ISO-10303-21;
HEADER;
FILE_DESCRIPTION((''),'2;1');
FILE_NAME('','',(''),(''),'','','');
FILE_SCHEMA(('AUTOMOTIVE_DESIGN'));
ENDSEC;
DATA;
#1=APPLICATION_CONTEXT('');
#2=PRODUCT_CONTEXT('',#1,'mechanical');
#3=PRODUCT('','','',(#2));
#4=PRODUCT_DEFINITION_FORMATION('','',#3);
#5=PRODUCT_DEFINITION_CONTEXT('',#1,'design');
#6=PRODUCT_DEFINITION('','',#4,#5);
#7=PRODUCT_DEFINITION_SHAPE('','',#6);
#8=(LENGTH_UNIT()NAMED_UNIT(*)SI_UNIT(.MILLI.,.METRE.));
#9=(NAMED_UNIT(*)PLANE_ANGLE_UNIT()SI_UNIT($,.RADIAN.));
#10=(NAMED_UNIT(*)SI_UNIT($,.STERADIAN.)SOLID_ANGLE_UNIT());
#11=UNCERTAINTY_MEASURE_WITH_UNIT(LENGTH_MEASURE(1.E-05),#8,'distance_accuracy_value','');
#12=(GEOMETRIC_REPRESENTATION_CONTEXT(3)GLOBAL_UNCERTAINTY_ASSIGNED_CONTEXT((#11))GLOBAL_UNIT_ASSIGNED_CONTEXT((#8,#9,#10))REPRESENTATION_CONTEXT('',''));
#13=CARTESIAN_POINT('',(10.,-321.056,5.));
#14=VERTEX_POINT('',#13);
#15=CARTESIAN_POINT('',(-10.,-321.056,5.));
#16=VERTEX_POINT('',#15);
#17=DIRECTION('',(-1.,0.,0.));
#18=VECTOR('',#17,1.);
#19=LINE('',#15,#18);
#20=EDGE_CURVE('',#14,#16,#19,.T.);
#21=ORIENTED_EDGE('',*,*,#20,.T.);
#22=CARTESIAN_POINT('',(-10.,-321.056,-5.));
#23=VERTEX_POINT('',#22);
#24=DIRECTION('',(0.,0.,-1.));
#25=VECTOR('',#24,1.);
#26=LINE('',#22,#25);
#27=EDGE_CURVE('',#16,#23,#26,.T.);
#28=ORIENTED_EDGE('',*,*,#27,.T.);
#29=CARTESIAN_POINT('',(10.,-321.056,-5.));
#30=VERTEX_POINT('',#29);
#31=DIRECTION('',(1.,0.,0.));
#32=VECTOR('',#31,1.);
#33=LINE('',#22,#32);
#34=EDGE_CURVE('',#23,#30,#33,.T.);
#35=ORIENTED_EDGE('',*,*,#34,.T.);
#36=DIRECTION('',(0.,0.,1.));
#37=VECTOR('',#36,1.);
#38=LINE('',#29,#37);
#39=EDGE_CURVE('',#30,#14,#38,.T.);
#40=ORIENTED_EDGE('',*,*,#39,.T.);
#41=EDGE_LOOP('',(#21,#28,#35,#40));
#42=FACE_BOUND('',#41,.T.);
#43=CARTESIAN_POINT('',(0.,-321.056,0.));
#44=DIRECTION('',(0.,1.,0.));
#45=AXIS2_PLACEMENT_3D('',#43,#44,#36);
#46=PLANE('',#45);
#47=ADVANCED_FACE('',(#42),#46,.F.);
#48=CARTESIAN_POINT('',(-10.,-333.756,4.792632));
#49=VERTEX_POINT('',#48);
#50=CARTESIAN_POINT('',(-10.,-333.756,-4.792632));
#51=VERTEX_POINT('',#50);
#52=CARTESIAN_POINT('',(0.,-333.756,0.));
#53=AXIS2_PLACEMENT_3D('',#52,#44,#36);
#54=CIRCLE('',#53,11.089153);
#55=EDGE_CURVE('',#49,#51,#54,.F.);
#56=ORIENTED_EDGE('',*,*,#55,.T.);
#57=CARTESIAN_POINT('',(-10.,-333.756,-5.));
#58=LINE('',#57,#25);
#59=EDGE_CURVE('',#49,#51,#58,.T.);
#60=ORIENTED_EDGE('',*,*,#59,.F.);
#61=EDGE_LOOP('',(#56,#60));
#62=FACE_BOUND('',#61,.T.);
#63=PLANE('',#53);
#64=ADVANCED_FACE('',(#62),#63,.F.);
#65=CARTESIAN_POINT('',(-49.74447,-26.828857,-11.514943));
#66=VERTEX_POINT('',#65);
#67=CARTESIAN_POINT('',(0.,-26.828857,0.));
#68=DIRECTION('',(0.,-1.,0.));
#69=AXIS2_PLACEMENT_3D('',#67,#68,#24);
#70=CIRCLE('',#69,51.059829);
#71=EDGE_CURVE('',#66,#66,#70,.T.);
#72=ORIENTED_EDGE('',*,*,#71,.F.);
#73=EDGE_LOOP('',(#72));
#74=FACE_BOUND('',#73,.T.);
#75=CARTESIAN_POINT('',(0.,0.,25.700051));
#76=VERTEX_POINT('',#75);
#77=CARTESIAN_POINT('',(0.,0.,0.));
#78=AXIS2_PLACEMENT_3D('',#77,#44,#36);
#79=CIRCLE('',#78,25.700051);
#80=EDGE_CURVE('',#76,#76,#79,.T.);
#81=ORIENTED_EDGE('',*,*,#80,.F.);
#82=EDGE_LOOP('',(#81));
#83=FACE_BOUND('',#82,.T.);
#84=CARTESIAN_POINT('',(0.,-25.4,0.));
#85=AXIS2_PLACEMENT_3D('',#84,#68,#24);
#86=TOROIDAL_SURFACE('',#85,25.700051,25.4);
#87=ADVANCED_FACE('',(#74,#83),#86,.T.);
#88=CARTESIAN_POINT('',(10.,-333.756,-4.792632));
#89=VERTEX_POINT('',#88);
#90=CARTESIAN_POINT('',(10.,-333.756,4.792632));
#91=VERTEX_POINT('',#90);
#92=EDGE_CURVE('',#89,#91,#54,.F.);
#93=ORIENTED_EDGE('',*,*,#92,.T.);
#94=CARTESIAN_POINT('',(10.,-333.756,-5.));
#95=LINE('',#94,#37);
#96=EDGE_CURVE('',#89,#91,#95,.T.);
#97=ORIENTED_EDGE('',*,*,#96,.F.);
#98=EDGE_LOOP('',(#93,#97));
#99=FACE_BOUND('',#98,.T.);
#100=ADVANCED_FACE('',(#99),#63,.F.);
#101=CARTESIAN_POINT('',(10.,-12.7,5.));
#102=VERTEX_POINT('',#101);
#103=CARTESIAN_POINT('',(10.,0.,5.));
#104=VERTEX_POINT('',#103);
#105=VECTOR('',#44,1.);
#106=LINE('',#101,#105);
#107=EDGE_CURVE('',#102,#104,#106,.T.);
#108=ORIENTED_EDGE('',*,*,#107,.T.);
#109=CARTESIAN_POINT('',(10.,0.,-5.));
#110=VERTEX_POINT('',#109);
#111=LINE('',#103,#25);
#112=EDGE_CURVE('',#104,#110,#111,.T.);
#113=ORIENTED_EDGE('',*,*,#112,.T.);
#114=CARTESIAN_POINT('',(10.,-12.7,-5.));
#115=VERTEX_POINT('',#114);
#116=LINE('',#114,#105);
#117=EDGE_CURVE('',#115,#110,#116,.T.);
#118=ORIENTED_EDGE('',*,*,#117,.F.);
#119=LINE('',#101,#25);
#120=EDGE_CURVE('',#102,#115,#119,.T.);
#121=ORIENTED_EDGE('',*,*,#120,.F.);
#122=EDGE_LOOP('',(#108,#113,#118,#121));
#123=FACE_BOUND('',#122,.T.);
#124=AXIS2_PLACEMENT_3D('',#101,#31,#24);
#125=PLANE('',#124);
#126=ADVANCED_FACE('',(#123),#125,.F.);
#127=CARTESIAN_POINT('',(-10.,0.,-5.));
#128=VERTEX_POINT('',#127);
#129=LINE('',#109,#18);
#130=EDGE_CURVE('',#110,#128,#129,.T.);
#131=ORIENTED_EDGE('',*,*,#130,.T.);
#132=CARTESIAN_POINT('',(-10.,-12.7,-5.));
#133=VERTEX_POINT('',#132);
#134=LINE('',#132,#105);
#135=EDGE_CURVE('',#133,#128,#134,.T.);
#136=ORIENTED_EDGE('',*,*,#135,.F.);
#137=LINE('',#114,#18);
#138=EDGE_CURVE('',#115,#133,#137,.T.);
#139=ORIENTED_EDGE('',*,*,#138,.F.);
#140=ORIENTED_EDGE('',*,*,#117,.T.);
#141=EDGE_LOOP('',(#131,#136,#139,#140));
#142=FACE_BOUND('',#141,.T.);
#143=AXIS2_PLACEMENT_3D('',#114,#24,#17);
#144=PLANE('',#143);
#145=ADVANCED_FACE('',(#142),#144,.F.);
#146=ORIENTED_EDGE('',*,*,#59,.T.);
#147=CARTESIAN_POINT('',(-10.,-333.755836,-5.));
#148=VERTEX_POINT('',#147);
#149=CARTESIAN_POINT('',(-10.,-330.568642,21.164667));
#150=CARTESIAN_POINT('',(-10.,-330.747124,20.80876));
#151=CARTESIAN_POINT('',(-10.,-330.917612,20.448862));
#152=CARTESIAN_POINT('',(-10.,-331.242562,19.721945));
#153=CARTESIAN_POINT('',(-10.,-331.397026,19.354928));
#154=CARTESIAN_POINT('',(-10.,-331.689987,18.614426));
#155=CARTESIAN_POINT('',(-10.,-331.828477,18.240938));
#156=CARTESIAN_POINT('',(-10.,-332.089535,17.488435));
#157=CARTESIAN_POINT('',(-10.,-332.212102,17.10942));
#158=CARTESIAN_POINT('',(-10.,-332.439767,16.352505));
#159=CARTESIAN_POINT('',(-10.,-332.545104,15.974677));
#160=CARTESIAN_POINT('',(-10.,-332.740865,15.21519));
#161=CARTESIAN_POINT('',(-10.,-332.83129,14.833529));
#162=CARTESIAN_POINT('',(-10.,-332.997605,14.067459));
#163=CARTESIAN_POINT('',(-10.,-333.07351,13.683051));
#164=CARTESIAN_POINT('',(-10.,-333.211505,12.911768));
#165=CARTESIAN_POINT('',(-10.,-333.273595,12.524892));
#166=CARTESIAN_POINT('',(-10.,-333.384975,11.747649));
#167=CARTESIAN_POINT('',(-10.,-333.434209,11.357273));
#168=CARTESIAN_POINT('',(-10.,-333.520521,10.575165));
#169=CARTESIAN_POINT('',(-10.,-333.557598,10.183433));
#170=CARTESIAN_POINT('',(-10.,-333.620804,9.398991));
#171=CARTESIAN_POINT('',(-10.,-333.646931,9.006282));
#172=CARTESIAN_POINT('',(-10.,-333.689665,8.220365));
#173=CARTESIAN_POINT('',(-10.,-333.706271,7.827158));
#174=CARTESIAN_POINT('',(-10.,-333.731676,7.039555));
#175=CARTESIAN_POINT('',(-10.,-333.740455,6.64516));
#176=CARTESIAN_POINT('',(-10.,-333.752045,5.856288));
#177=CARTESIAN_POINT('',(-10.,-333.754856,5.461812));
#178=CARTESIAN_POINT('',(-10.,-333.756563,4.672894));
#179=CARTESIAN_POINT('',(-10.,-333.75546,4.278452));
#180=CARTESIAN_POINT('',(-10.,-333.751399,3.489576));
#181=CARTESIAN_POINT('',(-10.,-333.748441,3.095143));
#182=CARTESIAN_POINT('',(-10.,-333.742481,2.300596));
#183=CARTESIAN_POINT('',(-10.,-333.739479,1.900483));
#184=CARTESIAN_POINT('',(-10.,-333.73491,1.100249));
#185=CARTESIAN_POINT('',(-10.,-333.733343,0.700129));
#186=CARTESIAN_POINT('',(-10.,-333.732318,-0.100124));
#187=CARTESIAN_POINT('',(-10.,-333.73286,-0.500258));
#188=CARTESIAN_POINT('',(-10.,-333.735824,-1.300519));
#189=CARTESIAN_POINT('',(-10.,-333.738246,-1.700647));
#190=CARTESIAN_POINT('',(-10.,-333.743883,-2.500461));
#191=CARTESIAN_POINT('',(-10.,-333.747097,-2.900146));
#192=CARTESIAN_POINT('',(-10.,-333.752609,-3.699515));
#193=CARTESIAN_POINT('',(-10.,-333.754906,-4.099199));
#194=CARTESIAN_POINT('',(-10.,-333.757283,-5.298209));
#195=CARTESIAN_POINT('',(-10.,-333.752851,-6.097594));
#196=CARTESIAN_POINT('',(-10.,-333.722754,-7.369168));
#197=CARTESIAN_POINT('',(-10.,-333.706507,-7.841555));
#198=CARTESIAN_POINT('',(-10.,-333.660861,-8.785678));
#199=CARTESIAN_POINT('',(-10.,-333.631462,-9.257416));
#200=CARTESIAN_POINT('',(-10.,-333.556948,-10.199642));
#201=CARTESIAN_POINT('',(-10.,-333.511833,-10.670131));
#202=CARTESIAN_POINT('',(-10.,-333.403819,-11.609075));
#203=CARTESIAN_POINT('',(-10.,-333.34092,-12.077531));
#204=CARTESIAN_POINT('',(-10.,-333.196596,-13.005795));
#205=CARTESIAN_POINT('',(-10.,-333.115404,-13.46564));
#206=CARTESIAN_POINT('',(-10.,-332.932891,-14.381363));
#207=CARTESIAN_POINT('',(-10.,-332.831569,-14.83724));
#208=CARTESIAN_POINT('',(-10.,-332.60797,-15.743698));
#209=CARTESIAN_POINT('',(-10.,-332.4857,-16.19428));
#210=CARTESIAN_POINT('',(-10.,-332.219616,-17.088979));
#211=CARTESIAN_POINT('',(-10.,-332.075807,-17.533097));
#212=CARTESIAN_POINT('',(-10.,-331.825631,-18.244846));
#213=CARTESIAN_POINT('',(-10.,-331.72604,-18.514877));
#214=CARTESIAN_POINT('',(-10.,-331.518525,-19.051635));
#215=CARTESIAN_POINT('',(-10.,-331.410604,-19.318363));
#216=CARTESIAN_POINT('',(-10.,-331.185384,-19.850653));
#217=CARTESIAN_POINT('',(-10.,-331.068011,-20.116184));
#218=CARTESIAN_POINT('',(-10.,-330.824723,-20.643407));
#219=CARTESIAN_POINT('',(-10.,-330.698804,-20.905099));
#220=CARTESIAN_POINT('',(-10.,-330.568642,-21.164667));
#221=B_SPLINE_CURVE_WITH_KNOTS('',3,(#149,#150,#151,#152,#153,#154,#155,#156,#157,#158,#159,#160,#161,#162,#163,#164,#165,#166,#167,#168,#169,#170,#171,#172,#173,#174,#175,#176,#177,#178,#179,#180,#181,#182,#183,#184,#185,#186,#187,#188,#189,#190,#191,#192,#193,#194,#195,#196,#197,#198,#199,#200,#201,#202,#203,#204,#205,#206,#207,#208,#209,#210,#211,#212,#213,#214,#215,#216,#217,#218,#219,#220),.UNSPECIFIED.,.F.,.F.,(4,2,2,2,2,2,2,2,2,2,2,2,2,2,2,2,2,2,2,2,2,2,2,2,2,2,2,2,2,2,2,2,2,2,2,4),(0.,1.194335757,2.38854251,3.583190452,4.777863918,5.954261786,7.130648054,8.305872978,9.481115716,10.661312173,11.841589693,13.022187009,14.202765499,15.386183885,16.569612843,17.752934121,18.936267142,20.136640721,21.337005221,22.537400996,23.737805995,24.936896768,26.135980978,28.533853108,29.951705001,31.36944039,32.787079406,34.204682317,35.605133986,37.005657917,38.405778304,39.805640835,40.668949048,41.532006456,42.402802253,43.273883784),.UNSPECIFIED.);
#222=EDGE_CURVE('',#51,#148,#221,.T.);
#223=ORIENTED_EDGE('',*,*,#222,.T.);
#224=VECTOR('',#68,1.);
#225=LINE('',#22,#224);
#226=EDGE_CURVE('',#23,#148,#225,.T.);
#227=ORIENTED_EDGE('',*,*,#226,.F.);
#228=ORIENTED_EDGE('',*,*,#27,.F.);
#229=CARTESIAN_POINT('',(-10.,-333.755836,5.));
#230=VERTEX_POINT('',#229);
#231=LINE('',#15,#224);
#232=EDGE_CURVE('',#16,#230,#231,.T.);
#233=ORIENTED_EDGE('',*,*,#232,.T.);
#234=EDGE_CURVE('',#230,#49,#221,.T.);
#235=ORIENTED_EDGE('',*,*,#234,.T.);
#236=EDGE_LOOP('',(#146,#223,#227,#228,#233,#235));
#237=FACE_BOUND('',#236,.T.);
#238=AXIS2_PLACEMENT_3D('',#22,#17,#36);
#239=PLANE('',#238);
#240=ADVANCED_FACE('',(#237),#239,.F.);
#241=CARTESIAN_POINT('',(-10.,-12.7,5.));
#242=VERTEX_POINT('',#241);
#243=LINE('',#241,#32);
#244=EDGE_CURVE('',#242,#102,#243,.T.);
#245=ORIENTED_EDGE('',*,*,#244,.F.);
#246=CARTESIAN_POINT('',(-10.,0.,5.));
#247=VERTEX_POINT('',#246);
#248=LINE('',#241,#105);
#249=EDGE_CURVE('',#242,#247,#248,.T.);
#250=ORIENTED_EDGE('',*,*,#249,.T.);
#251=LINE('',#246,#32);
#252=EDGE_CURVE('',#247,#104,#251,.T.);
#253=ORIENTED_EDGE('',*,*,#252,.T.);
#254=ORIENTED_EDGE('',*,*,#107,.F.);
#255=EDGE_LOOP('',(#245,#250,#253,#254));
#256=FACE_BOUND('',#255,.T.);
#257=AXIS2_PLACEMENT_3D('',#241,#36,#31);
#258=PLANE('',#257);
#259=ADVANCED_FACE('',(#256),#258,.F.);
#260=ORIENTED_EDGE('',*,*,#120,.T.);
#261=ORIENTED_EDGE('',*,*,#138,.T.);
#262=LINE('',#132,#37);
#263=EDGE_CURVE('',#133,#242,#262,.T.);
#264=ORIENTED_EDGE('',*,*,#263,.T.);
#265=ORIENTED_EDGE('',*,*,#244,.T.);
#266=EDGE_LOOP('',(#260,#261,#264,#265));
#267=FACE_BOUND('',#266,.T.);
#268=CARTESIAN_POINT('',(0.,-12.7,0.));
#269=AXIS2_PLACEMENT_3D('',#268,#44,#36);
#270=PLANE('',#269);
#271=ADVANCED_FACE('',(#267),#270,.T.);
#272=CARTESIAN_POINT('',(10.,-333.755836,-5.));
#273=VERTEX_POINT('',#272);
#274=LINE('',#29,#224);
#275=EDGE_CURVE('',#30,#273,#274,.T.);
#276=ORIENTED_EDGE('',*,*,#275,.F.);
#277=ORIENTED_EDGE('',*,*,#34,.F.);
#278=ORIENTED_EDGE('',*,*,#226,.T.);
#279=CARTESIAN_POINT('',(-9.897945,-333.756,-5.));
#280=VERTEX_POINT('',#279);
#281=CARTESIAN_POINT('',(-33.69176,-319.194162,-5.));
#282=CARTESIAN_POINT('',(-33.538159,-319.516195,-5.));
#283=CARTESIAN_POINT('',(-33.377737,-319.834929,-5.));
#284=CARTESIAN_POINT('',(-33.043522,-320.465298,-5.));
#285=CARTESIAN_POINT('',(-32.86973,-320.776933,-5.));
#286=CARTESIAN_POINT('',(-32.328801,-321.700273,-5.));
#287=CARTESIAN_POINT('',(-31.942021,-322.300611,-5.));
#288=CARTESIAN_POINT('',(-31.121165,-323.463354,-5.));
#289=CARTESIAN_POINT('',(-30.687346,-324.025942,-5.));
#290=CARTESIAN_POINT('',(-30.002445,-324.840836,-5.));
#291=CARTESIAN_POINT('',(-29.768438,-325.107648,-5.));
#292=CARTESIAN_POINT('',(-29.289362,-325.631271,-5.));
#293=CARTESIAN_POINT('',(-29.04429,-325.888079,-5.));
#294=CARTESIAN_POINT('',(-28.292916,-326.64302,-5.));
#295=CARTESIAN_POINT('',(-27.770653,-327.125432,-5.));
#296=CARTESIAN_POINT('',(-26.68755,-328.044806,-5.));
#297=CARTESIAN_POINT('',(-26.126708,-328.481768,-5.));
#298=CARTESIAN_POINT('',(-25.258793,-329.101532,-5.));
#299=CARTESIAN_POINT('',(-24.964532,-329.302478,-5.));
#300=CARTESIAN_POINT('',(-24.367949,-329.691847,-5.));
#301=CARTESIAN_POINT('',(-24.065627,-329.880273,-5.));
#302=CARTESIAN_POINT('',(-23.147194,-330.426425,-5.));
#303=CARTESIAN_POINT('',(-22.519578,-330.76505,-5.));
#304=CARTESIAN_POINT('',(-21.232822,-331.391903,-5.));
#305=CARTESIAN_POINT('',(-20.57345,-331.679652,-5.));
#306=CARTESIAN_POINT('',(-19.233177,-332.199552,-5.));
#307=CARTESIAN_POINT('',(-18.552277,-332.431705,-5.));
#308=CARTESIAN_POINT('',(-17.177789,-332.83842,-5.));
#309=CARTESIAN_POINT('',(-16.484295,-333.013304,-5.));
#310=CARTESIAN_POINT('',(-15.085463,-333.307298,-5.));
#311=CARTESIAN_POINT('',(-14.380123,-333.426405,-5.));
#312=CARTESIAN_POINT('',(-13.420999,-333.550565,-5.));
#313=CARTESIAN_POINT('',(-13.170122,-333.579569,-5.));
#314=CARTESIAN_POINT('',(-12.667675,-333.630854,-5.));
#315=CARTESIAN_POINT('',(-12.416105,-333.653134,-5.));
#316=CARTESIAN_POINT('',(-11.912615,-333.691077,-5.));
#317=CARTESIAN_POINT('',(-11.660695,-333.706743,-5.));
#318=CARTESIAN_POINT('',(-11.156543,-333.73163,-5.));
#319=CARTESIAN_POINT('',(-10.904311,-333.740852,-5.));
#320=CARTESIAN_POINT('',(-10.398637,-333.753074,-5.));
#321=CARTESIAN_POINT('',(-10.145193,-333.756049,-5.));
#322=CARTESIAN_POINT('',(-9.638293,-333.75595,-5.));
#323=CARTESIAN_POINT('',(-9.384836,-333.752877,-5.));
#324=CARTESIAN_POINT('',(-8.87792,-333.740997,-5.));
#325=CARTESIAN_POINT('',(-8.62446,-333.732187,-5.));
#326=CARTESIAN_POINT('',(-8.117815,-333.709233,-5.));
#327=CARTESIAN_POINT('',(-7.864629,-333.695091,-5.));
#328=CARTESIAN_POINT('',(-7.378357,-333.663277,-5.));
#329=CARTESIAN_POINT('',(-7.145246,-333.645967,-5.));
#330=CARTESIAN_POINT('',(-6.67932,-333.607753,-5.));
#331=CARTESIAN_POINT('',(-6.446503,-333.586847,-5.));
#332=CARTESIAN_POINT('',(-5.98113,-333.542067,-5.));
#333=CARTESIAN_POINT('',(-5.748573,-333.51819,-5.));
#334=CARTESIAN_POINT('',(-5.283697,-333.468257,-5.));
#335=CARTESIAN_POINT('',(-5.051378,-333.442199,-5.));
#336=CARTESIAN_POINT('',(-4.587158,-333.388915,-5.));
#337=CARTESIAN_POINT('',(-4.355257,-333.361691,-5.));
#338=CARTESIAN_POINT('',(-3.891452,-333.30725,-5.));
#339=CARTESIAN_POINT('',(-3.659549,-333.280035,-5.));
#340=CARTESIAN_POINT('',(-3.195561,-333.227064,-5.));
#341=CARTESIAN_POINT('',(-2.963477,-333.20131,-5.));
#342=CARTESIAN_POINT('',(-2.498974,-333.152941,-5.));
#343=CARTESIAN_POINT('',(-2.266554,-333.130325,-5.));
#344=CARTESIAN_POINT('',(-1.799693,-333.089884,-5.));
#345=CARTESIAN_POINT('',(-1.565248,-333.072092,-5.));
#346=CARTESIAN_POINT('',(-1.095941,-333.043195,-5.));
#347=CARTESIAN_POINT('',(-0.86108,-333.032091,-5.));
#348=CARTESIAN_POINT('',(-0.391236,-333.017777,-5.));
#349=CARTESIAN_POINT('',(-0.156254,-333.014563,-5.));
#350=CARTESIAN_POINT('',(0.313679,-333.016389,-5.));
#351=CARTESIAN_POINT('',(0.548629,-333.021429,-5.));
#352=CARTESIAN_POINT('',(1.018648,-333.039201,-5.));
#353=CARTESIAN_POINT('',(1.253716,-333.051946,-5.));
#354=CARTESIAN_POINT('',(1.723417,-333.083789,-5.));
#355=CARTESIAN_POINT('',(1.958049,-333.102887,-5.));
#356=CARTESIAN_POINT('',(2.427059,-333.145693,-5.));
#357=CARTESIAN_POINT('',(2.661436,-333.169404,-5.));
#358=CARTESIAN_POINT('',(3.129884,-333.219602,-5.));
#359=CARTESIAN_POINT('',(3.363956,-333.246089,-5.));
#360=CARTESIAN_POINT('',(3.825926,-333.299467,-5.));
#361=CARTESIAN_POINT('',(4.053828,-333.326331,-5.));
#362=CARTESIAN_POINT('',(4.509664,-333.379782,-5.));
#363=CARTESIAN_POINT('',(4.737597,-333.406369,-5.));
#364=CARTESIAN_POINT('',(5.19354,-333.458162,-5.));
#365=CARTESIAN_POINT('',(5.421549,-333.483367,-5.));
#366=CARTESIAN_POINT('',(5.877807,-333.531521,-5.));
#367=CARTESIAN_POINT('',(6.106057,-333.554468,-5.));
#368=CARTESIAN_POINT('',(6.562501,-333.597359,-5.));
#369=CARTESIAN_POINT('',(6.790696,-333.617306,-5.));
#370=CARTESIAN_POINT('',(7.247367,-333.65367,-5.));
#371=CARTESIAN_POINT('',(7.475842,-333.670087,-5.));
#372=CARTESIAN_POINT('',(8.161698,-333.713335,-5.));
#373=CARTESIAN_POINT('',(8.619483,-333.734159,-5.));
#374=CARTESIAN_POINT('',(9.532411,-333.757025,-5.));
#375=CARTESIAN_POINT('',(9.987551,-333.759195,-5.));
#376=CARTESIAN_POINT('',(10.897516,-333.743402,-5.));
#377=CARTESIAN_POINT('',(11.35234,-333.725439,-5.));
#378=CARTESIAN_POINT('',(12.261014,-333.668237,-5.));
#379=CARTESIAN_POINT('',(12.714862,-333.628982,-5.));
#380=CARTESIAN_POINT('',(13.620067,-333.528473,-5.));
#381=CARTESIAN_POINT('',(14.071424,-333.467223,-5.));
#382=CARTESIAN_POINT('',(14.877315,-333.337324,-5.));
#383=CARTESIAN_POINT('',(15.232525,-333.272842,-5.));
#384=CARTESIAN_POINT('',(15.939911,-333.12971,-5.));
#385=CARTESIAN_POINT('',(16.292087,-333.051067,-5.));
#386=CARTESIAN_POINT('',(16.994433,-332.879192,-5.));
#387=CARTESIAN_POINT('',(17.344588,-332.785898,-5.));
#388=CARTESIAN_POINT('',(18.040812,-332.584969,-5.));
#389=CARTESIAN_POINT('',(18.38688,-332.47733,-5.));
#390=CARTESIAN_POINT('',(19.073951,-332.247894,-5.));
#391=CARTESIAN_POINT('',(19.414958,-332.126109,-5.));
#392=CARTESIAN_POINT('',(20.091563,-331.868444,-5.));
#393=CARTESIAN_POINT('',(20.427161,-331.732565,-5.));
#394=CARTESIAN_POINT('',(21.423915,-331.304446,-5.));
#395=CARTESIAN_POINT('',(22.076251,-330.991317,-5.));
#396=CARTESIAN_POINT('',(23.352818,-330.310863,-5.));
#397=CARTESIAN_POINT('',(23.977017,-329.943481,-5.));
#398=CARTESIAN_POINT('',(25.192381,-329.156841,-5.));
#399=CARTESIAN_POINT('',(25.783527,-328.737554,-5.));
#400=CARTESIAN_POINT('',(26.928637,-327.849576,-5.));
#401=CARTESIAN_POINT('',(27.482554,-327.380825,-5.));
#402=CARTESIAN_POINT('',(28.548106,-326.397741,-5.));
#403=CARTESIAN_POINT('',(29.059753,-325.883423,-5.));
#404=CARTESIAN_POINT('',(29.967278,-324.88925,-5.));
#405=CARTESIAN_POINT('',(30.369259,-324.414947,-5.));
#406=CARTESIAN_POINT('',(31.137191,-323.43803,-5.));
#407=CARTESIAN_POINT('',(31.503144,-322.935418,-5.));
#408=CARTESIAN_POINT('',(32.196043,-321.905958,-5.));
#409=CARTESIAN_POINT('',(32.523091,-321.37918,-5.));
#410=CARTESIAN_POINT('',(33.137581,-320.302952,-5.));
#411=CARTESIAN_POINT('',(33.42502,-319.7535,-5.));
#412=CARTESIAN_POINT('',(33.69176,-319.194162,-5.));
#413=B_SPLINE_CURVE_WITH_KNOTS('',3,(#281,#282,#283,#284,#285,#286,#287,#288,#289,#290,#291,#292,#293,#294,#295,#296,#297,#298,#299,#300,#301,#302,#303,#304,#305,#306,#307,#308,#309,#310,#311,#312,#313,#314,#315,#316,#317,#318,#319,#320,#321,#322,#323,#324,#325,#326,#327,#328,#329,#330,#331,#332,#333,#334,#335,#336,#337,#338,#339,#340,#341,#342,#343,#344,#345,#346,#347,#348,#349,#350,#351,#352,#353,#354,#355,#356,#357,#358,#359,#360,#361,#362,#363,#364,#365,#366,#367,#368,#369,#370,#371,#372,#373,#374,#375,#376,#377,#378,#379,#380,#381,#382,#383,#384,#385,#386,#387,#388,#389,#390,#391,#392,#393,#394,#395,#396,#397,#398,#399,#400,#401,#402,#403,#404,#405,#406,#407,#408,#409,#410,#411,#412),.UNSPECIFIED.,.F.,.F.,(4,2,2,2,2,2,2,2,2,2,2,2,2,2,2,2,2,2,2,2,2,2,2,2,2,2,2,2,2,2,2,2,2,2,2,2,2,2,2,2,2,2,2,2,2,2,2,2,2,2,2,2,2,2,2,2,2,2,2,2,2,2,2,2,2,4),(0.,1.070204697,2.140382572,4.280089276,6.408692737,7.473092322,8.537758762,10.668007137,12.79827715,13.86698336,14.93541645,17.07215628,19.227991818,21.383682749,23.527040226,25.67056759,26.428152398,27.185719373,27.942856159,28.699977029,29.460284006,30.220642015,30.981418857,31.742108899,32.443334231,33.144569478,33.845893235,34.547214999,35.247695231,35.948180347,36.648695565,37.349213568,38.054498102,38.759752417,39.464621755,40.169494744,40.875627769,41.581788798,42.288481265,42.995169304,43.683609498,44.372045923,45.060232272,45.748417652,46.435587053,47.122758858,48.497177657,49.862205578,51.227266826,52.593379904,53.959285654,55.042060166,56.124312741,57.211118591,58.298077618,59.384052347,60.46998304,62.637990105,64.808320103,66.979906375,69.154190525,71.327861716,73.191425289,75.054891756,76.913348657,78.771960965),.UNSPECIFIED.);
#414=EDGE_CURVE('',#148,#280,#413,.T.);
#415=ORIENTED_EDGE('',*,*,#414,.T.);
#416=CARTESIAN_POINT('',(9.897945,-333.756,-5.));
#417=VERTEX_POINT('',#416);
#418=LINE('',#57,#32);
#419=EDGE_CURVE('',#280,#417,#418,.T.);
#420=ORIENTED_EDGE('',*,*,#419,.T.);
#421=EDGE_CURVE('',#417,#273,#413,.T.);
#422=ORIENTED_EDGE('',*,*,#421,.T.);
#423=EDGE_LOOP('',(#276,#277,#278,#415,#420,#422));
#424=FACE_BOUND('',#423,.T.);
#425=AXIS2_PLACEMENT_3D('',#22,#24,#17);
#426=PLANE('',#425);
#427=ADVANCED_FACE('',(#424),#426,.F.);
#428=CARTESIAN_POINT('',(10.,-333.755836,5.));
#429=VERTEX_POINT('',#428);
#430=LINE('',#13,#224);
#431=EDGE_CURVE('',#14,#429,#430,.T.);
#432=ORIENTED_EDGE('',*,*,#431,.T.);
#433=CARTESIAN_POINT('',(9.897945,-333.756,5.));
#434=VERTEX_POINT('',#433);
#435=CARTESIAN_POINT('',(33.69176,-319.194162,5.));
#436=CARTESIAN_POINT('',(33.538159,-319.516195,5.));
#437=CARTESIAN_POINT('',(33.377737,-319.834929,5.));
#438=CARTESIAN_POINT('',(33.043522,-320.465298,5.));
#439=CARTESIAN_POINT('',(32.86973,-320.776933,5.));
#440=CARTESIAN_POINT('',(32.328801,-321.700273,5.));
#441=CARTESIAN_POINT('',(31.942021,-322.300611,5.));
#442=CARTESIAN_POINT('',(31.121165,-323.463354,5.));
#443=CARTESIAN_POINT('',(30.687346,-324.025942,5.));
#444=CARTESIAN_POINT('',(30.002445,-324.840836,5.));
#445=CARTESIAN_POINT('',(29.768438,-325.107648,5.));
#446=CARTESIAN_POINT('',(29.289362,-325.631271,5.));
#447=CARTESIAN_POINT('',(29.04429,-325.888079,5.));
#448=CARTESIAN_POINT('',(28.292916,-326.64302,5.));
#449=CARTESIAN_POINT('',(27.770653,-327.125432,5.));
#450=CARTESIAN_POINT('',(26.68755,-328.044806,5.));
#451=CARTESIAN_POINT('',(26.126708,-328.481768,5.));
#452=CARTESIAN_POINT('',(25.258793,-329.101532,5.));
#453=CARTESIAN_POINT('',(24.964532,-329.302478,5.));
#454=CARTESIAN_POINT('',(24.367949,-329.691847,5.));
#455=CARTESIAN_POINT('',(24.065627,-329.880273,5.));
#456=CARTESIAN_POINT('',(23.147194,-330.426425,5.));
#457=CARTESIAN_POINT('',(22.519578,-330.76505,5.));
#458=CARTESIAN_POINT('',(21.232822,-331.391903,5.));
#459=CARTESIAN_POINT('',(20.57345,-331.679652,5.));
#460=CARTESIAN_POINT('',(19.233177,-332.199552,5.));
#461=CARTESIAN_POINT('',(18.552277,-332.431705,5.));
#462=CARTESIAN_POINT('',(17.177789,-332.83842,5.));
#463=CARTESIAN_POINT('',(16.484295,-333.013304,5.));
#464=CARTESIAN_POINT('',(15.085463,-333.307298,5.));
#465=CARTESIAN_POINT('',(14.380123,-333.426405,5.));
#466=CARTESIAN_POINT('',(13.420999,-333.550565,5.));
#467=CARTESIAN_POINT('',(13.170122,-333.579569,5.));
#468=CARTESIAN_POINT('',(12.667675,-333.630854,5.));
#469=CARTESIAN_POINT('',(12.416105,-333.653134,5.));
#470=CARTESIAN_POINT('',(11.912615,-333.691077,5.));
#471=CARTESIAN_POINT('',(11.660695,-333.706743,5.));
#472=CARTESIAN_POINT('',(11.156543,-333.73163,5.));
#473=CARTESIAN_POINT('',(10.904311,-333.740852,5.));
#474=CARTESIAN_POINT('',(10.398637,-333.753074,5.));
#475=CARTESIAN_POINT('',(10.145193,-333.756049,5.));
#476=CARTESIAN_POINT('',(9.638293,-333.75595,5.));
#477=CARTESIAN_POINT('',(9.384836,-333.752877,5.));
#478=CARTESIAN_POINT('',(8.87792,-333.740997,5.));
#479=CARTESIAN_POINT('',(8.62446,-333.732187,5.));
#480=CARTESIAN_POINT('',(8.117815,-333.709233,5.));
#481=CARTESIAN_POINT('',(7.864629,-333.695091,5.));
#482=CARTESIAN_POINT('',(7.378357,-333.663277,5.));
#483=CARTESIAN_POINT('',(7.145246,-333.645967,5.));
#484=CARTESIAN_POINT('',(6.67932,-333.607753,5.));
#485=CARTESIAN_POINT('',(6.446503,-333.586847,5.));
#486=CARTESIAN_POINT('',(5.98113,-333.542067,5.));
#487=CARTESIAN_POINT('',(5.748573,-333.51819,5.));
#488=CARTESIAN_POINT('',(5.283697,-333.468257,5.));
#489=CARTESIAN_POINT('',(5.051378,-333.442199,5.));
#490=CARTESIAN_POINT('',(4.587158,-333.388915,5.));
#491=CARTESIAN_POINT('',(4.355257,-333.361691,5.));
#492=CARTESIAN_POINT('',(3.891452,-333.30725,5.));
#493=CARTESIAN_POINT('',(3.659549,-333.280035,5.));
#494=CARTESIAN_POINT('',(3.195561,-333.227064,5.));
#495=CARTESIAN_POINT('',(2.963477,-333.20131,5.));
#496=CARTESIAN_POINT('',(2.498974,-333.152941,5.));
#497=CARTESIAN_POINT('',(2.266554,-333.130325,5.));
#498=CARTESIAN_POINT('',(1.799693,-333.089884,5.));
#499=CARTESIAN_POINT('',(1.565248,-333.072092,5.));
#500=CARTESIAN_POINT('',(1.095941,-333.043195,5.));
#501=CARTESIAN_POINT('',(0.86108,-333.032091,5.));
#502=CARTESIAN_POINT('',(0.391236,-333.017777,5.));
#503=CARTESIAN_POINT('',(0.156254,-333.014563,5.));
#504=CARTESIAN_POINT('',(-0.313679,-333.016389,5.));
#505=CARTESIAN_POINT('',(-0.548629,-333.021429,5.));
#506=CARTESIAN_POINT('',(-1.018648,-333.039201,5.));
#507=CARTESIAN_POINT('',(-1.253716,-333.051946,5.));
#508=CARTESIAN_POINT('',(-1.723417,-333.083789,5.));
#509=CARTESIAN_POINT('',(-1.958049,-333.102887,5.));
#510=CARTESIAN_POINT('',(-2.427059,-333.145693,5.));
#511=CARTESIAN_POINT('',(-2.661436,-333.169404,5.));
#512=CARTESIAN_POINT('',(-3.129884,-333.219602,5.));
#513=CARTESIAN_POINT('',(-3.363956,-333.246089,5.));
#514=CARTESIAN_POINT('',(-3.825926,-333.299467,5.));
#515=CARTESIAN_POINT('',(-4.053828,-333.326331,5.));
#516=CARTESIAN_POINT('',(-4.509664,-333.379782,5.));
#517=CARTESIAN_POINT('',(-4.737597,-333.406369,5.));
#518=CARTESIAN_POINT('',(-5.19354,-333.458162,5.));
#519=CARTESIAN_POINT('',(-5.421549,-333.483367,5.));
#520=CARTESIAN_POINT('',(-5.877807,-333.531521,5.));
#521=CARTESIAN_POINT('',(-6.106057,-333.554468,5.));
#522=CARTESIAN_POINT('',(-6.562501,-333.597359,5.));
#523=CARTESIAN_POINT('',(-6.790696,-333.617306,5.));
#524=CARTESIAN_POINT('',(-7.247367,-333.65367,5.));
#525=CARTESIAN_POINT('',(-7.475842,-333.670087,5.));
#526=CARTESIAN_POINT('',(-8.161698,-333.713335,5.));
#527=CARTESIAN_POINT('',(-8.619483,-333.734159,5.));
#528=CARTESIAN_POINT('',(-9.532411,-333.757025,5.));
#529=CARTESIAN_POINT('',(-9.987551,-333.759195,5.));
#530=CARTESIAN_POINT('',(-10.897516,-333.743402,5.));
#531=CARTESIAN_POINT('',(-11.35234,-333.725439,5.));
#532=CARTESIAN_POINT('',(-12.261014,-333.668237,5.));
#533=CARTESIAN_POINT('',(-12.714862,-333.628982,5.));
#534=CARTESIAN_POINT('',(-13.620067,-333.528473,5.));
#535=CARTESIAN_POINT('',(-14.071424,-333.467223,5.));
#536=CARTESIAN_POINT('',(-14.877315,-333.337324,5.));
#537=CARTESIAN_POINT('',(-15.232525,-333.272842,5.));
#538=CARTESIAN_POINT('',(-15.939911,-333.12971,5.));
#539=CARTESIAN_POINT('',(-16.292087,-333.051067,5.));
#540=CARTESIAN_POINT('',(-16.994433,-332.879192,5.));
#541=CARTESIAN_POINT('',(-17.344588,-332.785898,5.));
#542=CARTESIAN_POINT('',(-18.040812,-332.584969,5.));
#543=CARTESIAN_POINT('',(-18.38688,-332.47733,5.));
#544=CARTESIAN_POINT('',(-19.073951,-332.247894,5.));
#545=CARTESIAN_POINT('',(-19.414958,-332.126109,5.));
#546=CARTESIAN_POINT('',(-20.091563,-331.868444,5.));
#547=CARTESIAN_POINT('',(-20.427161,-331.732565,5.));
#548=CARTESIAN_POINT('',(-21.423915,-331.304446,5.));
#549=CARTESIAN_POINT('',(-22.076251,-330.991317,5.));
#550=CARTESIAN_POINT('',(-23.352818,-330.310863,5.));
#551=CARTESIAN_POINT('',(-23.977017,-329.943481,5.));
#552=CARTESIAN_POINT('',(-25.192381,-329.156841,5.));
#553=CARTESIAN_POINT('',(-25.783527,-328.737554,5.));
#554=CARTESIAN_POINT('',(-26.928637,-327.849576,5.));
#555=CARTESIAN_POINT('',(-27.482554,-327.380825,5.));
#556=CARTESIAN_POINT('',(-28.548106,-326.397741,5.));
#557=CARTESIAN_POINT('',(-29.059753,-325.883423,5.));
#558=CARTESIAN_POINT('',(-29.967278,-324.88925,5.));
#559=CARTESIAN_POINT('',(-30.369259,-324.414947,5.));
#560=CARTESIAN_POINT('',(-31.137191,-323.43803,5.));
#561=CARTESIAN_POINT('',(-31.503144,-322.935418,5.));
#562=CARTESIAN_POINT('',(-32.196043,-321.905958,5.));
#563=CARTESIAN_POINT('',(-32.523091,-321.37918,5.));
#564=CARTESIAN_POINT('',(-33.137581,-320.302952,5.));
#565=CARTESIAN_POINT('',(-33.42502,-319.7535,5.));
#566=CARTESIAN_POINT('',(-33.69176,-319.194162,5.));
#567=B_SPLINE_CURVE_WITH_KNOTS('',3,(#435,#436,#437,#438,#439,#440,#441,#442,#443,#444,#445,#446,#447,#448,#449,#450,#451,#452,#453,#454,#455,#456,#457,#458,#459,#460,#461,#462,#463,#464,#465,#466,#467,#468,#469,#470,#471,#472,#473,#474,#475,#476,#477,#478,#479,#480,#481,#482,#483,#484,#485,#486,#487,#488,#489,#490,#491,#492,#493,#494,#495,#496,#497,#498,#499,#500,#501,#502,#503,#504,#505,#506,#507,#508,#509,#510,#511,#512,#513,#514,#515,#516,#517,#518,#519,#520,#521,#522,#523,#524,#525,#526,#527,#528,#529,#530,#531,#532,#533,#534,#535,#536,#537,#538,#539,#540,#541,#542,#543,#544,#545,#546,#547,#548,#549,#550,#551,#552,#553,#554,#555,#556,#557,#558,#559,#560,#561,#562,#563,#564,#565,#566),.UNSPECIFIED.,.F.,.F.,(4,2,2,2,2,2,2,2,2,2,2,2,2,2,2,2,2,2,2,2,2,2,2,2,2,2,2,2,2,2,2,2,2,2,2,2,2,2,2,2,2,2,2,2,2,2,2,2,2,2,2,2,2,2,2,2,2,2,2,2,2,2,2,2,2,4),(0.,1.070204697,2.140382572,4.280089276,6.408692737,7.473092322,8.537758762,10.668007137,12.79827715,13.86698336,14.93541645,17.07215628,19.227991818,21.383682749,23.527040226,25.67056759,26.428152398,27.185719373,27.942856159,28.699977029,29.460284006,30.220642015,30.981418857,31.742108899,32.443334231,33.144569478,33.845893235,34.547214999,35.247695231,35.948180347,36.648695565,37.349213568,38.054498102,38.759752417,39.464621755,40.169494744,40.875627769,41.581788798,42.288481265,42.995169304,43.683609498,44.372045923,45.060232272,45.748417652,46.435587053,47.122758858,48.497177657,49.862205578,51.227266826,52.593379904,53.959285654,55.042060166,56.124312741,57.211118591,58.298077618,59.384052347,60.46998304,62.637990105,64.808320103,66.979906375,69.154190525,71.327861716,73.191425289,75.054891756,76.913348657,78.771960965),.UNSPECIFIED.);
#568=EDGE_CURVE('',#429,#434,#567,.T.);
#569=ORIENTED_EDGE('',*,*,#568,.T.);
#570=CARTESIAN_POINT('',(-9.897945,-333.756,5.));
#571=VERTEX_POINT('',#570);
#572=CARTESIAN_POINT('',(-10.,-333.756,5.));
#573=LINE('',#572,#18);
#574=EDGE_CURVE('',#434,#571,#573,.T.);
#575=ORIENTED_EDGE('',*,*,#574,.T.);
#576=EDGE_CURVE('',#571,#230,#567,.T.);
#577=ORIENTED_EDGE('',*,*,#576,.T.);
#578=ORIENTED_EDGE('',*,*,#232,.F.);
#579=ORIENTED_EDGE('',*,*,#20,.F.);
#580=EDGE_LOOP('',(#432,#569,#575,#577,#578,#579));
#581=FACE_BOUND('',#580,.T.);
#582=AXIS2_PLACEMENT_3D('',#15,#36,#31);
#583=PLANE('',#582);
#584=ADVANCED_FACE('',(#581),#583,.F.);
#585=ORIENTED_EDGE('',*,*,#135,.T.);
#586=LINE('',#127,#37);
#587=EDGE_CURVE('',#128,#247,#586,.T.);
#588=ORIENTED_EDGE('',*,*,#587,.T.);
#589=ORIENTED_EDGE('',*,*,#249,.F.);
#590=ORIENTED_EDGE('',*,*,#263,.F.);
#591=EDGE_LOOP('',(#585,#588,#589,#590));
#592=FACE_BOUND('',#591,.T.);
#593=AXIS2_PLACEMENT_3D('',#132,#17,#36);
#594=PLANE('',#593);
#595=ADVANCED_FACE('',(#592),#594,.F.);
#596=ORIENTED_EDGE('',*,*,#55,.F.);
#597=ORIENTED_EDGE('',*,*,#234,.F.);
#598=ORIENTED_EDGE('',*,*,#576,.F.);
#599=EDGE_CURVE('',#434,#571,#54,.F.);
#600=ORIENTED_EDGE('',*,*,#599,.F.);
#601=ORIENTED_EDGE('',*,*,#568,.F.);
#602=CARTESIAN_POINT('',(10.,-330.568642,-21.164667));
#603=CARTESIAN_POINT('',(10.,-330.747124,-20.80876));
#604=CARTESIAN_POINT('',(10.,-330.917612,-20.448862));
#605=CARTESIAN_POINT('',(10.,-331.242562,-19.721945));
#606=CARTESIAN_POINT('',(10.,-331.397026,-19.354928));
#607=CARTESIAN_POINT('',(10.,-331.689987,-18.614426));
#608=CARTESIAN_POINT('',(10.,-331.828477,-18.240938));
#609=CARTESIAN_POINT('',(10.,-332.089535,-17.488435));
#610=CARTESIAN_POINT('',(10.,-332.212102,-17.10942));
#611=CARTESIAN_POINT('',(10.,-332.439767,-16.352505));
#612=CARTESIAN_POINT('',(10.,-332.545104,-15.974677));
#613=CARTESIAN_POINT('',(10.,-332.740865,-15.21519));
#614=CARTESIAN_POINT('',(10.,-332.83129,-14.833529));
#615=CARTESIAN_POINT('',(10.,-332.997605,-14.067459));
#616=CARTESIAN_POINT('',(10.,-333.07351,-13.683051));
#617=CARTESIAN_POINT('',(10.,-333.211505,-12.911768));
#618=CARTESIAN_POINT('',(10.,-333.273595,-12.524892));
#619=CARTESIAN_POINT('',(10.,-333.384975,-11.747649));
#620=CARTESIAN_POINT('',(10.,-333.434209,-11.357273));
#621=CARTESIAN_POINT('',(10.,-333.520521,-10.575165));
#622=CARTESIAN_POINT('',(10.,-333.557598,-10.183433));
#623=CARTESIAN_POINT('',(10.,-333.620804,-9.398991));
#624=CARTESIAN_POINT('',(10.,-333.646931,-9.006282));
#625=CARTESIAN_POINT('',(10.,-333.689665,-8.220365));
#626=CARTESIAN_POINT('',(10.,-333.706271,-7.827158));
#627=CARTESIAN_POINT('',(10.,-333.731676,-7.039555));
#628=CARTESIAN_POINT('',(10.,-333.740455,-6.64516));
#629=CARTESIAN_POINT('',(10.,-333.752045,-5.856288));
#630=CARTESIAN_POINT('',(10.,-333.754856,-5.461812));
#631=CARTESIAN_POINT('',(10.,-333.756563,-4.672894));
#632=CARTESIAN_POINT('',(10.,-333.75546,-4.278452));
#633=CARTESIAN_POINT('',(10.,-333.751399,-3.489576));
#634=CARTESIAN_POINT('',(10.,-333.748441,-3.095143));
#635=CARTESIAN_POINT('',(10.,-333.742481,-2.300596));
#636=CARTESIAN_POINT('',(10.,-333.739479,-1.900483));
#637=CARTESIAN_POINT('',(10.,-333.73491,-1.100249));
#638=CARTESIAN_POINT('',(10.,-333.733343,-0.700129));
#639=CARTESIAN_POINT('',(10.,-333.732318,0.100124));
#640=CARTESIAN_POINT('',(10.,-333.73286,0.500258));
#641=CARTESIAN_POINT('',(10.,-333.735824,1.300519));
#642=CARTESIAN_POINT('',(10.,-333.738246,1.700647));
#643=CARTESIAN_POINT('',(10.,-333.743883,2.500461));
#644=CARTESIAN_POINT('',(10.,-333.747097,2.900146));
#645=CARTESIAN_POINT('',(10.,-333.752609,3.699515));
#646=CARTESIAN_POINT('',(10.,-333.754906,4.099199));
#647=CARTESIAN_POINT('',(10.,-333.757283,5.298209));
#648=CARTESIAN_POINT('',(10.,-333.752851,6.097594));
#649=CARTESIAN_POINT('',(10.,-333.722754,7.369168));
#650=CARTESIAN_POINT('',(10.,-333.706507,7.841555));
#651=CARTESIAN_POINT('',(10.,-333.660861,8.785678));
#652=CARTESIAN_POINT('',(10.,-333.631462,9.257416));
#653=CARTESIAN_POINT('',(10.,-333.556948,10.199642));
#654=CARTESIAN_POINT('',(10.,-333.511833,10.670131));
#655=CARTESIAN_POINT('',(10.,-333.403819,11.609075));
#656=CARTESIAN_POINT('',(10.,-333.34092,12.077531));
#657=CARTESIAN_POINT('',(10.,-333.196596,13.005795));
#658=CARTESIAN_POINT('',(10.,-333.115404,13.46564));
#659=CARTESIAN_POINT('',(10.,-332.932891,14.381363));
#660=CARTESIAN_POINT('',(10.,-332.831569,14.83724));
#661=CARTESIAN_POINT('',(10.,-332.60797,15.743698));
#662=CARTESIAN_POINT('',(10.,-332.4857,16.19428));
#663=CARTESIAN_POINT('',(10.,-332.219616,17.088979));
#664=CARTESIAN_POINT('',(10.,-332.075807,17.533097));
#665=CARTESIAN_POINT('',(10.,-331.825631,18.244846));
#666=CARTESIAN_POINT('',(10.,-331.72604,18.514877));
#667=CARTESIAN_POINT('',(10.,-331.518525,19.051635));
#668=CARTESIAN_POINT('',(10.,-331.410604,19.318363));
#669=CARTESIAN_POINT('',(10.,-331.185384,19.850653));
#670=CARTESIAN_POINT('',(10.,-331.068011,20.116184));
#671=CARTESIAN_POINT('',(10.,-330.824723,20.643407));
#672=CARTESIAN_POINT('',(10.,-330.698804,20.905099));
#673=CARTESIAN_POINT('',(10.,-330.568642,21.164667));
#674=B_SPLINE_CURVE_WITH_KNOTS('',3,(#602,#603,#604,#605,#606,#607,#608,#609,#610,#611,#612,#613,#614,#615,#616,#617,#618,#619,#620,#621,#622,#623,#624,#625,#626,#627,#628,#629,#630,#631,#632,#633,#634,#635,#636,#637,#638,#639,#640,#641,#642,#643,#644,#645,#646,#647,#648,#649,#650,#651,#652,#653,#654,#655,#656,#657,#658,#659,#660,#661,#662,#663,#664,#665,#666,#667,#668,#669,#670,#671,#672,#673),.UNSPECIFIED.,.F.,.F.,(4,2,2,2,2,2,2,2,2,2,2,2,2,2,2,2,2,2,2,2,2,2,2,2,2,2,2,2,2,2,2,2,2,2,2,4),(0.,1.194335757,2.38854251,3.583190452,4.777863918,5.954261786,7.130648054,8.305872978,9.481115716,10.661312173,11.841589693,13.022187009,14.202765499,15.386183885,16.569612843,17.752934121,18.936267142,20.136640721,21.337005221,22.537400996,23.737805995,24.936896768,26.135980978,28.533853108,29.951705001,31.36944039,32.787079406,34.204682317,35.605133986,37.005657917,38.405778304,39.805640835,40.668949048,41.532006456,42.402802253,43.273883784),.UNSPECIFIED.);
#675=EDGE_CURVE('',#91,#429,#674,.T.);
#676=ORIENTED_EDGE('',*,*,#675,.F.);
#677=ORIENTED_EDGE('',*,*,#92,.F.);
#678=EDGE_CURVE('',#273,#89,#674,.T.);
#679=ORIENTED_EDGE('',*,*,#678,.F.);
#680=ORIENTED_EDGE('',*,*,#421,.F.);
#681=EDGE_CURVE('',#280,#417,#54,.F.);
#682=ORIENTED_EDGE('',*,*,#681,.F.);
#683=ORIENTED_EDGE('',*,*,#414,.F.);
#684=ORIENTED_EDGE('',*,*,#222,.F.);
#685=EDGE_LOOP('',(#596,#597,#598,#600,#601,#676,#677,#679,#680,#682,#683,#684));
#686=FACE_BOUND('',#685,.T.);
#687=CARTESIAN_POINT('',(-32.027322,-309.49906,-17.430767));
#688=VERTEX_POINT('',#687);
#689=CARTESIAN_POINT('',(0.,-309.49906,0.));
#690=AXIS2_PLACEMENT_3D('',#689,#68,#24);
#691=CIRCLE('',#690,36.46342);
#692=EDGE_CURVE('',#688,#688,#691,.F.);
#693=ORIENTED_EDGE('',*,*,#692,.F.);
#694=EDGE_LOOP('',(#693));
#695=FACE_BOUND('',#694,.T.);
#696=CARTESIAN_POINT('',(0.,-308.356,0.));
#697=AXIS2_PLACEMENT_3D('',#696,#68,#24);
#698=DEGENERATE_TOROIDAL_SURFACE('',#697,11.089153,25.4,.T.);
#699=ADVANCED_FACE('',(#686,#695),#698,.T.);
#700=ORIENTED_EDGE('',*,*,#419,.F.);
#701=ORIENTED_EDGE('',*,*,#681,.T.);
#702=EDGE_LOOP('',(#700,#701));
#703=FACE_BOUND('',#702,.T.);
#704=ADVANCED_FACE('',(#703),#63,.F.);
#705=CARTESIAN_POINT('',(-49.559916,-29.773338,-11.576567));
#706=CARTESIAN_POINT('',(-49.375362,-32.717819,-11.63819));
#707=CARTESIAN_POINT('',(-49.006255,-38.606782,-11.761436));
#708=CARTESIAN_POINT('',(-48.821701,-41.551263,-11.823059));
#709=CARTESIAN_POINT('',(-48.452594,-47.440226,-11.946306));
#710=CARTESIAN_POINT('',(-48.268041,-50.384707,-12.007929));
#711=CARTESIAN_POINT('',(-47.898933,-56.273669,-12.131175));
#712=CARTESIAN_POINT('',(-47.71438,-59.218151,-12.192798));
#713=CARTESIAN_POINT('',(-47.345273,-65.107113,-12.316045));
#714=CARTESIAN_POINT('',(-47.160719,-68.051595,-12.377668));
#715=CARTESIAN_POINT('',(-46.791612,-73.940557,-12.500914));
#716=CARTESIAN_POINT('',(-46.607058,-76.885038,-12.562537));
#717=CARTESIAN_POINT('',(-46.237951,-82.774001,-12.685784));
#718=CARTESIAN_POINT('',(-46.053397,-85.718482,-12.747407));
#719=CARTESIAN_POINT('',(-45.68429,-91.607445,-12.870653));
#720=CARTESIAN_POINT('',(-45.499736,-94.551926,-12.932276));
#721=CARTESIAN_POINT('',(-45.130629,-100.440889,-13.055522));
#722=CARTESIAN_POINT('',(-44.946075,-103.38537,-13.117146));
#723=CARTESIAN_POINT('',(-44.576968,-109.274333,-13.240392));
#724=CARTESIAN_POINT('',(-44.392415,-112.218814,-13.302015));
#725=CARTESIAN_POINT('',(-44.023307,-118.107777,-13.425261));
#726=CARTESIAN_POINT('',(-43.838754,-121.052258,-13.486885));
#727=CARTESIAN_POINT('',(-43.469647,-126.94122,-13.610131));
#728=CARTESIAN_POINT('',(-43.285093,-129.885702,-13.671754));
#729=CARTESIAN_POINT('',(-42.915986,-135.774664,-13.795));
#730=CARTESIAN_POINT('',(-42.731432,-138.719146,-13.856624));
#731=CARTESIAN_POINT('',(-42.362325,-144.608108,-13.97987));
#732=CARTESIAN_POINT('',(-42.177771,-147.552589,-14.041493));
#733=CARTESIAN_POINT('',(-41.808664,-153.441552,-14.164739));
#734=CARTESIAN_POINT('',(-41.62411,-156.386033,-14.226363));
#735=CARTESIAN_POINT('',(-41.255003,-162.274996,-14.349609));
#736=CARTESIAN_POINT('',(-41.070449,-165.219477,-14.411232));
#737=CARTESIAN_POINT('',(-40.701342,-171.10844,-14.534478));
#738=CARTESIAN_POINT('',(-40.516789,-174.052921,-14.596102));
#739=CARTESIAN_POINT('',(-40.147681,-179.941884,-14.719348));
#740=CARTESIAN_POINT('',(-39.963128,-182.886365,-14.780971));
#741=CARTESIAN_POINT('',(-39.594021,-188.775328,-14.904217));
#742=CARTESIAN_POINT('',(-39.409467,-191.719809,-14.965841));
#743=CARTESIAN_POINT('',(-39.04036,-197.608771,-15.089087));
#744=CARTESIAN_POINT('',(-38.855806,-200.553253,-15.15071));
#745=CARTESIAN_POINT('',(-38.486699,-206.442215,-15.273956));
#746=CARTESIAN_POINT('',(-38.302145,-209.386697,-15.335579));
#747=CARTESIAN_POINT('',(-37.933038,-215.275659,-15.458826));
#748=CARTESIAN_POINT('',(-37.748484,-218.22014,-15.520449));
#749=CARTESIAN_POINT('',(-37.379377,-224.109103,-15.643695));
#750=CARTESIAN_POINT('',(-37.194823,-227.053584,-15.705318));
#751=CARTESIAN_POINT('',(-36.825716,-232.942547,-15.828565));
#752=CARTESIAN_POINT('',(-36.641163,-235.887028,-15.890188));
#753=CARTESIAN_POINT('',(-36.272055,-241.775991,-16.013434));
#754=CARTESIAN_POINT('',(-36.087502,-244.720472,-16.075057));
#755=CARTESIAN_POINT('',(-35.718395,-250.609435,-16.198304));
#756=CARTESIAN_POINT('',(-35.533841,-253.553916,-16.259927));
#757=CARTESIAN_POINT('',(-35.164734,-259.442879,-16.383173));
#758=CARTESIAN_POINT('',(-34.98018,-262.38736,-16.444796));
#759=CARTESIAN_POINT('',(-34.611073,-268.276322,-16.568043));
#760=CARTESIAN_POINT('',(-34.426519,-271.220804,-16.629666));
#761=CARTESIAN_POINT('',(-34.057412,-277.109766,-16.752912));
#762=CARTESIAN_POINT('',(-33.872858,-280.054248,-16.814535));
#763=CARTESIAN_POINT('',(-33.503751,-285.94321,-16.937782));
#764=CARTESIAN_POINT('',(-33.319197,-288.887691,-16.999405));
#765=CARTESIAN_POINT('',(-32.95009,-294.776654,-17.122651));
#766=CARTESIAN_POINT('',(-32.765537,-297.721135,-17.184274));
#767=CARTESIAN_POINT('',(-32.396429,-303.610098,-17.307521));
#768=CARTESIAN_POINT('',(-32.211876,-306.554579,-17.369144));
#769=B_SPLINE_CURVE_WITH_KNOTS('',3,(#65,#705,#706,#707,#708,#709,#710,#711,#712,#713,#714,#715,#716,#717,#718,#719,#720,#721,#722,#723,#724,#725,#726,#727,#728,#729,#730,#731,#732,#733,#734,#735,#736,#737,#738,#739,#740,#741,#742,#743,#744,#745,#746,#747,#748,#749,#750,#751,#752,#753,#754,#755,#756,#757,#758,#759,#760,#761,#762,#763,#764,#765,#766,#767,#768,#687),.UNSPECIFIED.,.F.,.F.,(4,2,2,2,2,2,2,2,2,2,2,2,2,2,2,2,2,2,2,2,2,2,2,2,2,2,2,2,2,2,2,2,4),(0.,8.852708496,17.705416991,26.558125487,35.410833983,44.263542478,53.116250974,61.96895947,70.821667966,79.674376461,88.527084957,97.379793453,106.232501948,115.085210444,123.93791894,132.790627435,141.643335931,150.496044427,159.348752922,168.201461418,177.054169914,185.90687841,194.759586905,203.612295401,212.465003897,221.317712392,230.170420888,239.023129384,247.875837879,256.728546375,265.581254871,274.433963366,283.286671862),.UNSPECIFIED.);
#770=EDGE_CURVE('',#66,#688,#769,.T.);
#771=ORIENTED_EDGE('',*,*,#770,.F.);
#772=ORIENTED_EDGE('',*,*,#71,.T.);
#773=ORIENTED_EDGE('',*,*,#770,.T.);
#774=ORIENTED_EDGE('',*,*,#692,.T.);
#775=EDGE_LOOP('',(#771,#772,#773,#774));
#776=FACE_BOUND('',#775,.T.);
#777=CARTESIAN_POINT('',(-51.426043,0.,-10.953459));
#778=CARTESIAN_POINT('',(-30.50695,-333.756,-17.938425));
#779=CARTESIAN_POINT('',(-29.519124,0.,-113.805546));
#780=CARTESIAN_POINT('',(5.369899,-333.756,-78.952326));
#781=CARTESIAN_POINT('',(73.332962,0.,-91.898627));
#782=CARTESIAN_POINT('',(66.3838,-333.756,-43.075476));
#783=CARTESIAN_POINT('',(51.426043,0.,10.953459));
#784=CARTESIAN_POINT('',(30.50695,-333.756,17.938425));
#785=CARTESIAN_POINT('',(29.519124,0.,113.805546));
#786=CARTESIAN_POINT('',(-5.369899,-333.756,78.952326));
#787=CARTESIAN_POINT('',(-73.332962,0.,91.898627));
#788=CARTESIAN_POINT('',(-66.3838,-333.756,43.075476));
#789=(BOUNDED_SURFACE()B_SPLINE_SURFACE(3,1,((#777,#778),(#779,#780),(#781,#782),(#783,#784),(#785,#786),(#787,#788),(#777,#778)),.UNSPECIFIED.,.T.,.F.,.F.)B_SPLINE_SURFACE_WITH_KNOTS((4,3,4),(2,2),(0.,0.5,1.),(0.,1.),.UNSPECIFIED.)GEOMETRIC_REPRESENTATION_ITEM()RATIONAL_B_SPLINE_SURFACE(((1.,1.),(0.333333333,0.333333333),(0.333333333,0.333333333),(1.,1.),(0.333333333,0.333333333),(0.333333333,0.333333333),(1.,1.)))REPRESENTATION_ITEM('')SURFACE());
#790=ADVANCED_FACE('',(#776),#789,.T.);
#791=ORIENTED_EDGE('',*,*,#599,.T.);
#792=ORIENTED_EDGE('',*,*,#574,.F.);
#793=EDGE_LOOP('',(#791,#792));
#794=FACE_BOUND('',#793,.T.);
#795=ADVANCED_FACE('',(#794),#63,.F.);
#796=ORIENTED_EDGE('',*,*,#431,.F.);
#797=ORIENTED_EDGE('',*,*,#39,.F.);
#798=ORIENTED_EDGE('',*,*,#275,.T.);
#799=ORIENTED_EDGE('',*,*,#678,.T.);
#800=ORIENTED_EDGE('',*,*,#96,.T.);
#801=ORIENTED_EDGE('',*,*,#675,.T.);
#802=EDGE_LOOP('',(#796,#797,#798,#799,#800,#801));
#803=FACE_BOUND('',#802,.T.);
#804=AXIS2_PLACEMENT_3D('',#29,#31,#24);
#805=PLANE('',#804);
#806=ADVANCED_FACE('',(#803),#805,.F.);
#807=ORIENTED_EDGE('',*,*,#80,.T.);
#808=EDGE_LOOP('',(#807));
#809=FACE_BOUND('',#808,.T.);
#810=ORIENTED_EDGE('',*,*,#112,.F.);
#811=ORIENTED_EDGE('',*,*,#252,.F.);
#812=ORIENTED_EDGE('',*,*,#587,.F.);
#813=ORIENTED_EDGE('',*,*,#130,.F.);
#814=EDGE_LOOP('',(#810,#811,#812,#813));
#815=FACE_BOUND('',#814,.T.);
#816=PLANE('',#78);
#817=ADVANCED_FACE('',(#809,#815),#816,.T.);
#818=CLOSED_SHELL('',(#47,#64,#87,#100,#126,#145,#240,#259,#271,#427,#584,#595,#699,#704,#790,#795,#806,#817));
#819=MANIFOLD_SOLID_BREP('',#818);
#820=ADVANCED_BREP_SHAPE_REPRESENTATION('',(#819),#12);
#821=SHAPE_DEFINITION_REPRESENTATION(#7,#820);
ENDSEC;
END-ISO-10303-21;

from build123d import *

# Parameters (mm, degrees)
FILLET3_R          = 25.4
SKETCH5_W          = 20
SKETCH5_H          = 10
CUT_EXTRUDE2_DEPTH = 12.7
SKETCH4_W          = 20
SKETCH4_H          = 10
CUT_EXTRUDE1_DEPTH = 12.7


with BuildPart() as part:
    # Loft1: read off the stored shape, not the designer's step
    # Loft1: loft between two sections, ruled curve by curve
    loft1_from = [
        Edge.make_bspline([(-51.426043, 0, -10.953459), (-29.519124, 0, -113.805546), (73.332962, 0, -91.898627), (51.426043, 0, 10.953459), (29.519124, 0, 113.805546), (-73.332962, 0, 91.898627), (-51.426043, 0, -10.953459)], [0, 0, 0, 0, 0.5, 0.5, 0.5, 1, 1, 1, 1], 3, [1, 0.333333, 0.333333, 1, 0.333333, 0.333333, 1]),
    ]
    loft1_to = [
        Edge.make_bspline([(-30.50695, -333.756, -17.938425), (5.369899, -333.756, -78.952326), (66.3838, -333.756, -43.075476), (30.50695, -333.756, 17.938425), (-5.369899, -333.756, 78.952326), (-66.3838, -333.756, 43.075476), (-30.50695, -333.756, -17.938425)], [0, 0, 0, 0, 0.5, 0.5, 0.5, 1, 1, 1, 1], 3, [1, 0.333333, 0.333333, 1, 0.333333, 0.333333, 1]),
    ]
    loft1 = Solid(Shell([*[Face.make_surface_from_curves(loft1_from[k], loft1_to[k]) for k in range(1)], Face(Wire(loft1_from)), Face(Wire(loft1_to))]))
    add(loft1)

    # Fillet3
    fillet3_edges = [part.edges().sort_by_distance(p)[0] for p in [
        (30.50695, -333.756, 17.938425),
        (51.426043, 0, 10.953459),
    ]]
    fillet(fillet3_edges, radius=FILLET3_R)

    # Sketch5 → Cut-Extrude2 (cut)
    with BuildSketch(Plane.XZ.offset(333.756)):
        Rectangle(SKETCH5_W, SKETCH5_H)
    extrude(amount=-CUT_EXTRUDE2_DEPTH, mode=Mode.SUBTRACT)

    # Sketch4 → Cut-Extrude1 (cut)
    with BuildSketch(Plane(origin=(0, 0, 0), x_dir=(1, 0, 0), z_dir=(0, 1, 0))):
        Rectangle(SKETCH4_W, SKETCH4_H)
    extrude(amount=-CUT_EXTRUDE1_DEPTH, mode=Mode.SUBTRACT)


solid = part.part
